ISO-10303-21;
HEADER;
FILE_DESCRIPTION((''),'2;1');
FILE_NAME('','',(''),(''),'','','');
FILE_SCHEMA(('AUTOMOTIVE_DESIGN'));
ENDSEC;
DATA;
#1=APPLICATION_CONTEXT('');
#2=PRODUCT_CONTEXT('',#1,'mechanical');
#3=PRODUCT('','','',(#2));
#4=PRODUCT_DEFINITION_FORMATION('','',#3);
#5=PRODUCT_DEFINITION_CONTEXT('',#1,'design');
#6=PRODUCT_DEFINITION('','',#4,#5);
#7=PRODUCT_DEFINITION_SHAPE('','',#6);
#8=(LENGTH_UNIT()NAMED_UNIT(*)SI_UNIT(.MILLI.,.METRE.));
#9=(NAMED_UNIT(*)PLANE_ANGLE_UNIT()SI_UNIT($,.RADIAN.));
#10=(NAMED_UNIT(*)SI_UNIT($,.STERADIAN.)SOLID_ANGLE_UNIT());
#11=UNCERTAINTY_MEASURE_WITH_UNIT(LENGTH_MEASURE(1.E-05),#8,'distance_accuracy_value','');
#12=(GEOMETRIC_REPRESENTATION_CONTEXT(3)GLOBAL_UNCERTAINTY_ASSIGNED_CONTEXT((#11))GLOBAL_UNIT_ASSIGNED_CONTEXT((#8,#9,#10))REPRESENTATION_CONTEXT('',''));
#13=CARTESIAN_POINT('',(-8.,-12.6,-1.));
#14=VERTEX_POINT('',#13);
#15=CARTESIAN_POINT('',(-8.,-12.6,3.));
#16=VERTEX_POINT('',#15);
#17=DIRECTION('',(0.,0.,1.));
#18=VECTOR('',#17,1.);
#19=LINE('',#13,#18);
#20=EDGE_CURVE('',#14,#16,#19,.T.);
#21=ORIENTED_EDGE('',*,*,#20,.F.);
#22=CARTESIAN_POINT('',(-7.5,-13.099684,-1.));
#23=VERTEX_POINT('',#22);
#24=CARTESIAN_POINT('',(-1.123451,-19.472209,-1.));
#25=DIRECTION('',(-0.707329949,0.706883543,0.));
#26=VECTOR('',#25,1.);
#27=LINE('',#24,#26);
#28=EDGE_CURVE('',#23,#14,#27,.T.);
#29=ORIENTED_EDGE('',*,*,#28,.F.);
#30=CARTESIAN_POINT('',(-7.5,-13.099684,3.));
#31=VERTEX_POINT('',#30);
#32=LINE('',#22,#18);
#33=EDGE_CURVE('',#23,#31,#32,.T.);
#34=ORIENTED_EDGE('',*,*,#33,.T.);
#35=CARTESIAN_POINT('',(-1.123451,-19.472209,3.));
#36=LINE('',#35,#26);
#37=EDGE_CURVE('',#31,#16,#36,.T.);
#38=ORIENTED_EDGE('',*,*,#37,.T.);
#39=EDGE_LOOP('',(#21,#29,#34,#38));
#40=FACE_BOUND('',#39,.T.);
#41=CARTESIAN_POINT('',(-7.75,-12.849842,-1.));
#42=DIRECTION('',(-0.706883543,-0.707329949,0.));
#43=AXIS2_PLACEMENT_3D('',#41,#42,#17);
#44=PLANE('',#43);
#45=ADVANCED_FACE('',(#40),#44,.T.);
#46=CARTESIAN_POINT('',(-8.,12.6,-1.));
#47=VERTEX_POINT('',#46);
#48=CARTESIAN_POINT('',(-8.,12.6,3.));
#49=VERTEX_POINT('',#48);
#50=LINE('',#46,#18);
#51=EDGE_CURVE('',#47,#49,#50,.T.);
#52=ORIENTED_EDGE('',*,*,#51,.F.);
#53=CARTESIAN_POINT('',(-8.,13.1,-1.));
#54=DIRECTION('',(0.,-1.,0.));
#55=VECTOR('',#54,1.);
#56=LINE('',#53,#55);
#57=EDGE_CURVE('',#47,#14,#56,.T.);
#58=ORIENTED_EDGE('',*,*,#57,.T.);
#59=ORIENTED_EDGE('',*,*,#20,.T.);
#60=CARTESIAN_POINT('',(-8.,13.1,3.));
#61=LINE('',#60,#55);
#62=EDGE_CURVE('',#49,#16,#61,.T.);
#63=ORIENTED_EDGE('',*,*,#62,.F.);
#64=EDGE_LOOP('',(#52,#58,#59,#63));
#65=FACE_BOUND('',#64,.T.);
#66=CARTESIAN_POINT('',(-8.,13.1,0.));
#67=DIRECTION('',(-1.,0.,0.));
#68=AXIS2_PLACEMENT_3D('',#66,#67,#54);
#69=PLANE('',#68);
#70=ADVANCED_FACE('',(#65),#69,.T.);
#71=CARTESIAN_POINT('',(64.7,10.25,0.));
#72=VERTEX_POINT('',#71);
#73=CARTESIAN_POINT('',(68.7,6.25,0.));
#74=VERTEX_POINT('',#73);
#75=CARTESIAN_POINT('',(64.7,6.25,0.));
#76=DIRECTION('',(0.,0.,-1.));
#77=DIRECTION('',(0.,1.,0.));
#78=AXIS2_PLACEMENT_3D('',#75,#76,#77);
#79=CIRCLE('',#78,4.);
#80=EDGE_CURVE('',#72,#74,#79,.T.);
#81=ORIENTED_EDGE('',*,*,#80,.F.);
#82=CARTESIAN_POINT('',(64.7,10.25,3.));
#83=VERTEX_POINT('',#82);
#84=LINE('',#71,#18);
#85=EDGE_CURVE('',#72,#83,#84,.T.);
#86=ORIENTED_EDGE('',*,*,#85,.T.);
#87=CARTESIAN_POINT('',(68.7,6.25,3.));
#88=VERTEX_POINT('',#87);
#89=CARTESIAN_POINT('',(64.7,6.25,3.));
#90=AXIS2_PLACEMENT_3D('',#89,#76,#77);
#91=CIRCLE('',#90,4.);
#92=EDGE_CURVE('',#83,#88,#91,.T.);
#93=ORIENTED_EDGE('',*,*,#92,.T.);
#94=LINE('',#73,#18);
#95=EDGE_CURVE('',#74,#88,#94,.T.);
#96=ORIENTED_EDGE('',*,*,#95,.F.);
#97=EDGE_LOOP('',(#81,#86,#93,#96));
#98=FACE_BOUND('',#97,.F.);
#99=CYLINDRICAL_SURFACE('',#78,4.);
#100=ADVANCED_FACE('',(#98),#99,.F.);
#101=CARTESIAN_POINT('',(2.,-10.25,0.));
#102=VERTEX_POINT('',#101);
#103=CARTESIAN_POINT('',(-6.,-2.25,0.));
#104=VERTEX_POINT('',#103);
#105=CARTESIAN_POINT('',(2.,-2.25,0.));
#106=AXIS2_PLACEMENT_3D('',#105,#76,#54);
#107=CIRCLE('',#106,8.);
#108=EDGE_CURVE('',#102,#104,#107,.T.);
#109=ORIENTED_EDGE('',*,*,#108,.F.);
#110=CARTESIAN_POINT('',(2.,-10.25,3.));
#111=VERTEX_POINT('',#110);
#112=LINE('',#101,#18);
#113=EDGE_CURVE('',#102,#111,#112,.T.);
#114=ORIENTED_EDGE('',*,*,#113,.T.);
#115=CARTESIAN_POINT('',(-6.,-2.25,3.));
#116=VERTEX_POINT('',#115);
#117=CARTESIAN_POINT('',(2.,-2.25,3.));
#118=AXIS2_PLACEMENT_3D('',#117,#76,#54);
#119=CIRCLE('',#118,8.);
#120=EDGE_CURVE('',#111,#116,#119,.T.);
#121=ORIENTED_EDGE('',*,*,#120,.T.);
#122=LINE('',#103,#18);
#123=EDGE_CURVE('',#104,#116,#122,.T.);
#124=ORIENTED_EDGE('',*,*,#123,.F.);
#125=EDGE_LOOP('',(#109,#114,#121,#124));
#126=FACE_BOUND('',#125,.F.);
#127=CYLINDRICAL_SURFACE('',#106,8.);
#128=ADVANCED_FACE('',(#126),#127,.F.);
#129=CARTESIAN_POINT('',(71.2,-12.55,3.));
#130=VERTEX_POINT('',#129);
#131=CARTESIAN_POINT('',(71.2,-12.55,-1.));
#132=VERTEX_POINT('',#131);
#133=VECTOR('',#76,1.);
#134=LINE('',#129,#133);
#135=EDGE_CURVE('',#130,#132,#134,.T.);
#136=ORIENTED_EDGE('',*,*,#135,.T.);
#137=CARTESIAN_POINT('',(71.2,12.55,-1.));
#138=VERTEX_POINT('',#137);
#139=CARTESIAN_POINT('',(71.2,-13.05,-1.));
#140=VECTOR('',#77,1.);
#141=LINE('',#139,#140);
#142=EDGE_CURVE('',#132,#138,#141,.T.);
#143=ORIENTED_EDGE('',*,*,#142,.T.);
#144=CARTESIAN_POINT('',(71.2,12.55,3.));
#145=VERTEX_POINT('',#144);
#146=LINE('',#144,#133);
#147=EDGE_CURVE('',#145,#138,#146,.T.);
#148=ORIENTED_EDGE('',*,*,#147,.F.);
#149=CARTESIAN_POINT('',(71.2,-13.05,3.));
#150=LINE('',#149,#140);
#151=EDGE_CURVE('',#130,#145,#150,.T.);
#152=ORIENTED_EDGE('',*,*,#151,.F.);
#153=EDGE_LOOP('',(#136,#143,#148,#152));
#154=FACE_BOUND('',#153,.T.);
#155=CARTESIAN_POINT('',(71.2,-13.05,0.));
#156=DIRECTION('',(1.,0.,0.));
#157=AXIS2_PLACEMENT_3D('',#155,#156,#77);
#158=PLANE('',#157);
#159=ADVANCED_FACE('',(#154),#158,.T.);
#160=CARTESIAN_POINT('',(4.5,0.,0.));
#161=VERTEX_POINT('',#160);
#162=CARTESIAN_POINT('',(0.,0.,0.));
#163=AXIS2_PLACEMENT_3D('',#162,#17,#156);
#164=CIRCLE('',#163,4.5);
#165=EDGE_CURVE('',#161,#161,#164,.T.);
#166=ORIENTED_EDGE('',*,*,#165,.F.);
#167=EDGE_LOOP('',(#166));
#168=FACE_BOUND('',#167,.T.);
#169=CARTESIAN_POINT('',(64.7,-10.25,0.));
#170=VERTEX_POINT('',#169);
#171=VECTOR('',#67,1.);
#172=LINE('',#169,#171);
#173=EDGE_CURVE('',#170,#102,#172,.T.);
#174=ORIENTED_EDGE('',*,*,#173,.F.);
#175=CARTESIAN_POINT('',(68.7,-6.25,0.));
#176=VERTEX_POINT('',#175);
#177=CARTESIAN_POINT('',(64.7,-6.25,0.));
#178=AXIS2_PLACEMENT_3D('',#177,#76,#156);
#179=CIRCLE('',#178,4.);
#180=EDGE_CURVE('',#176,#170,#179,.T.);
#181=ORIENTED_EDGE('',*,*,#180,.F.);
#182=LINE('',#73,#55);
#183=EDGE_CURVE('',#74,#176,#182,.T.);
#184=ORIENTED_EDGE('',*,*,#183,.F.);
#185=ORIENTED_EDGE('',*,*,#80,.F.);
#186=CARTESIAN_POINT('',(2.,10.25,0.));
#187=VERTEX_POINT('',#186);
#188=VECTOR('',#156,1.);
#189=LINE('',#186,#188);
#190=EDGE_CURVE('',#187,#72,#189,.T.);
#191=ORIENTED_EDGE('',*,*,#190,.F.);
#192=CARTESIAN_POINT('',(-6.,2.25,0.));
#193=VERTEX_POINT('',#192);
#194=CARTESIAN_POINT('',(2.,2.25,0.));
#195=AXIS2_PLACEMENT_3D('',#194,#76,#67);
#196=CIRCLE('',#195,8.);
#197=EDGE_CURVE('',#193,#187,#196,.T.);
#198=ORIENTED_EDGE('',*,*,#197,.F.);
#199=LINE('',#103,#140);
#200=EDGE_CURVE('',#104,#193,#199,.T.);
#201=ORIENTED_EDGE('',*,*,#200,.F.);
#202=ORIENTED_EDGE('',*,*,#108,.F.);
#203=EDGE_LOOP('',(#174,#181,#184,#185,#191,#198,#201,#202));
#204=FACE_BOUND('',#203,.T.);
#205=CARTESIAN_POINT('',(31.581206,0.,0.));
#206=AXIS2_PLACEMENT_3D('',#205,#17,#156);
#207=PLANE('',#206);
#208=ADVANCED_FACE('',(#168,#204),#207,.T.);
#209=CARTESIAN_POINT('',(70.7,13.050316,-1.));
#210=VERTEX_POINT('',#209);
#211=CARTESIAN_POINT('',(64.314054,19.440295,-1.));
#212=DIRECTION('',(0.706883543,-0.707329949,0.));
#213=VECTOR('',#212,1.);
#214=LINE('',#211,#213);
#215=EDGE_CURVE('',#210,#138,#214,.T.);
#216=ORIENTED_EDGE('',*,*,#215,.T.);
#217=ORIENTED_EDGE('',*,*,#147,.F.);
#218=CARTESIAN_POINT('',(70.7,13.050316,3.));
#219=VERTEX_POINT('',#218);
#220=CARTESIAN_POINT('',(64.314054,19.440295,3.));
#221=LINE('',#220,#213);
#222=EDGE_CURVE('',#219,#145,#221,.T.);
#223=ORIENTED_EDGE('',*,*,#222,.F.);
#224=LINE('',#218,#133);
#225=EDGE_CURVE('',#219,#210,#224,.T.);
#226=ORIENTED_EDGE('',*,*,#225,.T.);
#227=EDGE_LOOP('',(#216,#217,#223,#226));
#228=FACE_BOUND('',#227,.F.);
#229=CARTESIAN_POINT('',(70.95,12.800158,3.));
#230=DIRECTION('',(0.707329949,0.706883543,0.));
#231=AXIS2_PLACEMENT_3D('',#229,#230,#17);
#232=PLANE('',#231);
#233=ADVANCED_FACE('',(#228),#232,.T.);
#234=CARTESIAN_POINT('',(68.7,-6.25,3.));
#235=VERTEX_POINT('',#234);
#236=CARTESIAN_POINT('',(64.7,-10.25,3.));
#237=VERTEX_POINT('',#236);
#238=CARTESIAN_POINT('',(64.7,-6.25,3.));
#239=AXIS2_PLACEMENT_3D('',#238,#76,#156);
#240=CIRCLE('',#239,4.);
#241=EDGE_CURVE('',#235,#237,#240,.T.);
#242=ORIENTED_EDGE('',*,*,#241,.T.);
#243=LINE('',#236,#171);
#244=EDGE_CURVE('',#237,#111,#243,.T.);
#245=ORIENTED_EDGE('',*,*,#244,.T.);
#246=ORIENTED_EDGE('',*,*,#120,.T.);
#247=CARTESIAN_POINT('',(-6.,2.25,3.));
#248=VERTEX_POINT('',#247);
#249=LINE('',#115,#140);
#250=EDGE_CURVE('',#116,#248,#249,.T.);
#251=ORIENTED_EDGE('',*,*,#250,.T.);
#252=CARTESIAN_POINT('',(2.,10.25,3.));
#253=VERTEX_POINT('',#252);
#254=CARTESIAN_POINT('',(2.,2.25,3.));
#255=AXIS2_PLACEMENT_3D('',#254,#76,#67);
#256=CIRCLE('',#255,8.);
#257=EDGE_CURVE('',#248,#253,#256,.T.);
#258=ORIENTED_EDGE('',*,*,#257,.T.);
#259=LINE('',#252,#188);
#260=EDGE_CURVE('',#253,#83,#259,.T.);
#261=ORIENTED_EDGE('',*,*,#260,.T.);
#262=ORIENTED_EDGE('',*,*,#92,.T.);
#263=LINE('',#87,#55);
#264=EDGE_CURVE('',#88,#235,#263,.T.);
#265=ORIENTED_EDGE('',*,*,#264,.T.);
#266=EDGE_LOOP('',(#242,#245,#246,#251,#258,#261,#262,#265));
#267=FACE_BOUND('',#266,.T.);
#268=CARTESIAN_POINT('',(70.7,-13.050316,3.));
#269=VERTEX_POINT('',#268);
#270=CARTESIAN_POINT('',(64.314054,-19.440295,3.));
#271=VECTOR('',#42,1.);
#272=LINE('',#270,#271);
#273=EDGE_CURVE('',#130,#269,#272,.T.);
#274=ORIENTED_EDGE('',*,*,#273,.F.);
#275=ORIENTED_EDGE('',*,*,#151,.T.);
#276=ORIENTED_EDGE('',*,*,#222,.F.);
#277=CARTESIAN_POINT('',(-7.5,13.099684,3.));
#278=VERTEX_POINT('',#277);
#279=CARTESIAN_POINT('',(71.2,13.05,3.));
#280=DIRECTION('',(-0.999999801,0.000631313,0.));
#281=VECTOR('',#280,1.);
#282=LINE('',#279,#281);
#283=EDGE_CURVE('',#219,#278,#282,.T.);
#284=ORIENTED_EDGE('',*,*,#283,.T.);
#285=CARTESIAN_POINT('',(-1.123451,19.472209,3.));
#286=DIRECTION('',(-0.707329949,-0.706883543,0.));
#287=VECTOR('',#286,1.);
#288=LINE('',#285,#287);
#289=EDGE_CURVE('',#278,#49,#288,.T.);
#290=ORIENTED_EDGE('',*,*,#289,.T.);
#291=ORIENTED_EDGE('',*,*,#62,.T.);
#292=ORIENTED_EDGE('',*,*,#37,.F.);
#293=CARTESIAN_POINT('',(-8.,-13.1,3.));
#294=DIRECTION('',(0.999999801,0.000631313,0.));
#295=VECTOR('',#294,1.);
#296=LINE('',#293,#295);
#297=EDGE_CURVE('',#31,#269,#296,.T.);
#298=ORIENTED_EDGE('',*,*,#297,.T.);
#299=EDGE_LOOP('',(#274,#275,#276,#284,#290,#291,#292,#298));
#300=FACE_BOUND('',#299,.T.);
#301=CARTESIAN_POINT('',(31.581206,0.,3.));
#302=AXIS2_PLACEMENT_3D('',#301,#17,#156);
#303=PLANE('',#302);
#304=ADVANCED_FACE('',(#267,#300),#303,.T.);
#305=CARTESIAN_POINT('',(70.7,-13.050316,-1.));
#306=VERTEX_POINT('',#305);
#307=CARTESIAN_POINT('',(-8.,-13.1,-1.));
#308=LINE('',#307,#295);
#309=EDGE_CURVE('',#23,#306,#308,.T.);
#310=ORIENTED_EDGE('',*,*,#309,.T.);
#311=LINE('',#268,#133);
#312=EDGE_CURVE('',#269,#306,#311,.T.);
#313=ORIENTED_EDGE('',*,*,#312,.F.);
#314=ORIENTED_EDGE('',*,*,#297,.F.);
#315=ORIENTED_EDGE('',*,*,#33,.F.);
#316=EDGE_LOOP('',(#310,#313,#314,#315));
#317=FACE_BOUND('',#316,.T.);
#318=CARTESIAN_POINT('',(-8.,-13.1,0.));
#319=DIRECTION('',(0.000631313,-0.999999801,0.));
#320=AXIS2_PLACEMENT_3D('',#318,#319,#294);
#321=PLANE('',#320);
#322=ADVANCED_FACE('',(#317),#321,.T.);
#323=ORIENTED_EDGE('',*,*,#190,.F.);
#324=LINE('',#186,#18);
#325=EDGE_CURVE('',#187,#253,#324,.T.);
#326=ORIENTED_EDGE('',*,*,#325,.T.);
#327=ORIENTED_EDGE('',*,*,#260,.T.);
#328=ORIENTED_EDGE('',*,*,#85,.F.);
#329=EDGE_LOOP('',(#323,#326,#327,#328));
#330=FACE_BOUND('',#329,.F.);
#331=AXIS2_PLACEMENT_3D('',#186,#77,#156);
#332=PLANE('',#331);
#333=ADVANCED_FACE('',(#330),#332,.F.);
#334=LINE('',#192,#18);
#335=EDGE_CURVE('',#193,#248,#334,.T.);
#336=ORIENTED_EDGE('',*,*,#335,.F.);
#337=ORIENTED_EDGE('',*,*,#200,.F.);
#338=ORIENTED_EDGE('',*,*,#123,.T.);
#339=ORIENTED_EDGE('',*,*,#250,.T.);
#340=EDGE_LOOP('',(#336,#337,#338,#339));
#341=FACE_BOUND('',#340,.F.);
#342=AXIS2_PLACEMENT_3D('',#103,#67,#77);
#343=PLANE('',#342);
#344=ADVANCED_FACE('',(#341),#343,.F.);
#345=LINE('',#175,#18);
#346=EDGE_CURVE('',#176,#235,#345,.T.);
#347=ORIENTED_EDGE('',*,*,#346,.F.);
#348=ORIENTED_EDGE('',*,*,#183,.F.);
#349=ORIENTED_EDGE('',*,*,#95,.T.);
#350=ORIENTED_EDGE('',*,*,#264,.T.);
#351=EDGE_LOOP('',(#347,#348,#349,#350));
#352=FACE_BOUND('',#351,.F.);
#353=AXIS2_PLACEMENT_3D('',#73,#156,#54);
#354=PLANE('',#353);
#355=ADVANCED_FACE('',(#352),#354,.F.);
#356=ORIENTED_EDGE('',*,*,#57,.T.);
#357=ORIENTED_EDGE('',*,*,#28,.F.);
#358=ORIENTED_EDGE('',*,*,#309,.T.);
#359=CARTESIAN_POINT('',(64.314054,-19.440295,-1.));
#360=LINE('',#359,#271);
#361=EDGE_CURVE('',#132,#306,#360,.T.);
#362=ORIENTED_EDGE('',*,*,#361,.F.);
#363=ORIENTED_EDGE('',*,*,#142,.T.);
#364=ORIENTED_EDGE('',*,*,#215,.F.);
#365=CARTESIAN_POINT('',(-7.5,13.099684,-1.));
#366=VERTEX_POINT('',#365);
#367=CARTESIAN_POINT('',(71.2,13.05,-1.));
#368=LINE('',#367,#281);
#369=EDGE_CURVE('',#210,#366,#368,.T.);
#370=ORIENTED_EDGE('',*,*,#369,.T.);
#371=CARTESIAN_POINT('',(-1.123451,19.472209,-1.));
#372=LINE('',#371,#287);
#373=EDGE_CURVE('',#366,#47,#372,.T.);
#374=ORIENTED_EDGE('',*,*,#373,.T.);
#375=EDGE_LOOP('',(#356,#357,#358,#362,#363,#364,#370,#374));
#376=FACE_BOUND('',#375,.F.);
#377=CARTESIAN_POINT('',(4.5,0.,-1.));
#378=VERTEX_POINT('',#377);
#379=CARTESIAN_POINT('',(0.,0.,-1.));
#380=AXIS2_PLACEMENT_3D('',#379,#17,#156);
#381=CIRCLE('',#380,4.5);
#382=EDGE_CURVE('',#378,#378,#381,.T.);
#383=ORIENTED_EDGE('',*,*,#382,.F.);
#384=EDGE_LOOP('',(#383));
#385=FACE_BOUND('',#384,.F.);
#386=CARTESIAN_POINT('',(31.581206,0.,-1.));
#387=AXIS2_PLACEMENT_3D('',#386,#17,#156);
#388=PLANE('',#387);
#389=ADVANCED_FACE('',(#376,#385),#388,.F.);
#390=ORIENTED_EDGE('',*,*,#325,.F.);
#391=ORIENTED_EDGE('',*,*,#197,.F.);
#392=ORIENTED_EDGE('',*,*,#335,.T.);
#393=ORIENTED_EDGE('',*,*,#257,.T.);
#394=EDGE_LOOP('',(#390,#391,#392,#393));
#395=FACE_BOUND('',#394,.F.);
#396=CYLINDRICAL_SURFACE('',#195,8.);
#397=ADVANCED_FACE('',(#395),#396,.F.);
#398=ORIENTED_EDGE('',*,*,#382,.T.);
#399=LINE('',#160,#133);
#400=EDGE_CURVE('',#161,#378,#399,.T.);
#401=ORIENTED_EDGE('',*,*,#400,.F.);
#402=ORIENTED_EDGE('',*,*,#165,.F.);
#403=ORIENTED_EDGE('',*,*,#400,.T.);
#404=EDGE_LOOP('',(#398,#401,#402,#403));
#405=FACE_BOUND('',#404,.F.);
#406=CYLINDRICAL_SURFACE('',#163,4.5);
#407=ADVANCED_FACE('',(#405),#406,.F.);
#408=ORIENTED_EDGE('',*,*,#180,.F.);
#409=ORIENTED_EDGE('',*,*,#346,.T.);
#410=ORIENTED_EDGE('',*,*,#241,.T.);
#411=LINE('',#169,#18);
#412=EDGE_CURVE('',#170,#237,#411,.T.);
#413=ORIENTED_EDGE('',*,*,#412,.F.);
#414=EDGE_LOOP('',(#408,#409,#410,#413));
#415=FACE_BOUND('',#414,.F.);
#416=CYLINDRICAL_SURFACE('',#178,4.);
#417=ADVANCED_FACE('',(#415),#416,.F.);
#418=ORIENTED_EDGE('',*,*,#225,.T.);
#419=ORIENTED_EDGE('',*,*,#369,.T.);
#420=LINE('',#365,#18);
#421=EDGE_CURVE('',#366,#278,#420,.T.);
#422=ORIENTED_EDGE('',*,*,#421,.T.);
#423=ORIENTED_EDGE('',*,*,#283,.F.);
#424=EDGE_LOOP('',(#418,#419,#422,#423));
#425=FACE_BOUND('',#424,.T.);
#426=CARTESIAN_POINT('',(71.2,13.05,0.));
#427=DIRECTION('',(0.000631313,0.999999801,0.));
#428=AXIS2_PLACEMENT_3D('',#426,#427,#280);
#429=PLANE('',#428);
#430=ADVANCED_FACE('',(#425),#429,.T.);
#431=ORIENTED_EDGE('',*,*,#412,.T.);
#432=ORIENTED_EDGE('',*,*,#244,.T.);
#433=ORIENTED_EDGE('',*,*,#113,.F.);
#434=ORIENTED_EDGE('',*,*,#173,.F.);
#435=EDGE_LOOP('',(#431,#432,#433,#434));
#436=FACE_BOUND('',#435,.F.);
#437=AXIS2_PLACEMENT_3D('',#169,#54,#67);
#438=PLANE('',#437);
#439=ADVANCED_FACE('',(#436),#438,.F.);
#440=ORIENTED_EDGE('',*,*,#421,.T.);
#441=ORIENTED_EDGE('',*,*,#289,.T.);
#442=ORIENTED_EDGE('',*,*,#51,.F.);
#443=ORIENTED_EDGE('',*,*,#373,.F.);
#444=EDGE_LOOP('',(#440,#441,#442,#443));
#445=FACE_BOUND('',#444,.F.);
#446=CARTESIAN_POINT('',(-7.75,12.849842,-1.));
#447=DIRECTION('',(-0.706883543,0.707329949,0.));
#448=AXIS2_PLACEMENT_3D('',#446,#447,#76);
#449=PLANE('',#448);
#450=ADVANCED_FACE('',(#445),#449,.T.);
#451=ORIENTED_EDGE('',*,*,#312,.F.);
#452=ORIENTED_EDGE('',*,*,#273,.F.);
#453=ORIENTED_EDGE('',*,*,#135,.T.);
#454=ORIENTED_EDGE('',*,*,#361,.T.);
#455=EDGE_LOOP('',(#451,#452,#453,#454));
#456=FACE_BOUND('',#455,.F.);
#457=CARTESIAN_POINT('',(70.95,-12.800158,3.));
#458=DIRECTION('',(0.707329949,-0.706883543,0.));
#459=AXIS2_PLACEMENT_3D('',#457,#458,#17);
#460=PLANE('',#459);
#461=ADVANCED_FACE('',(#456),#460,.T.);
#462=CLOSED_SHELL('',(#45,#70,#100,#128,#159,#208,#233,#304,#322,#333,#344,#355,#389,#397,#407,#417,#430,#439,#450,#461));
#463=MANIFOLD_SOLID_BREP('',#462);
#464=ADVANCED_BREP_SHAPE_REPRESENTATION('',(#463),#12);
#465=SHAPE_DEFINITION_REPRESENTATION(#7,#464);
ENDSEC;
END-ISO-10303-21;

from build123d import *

# Parameters (mm, degrees)
F1_DEPTH = 3
F0_R     = 4.5
F2_DEPTH = 1
F3_SIZE  = 0.5


with BuildPart() as f1:
    # F0 (on Top) → F1 (new body)
    with BuildSketch(Plane.XY):
        Polygon((71.2, 13.05), (-8, 13.1), (-8, -13.1), (71.2, -13.05), align=None)
        with BuildLine():
            ThreePointArc((-6, 2.25), (-3.6568542495, 7.9068542495), (2, 10.25))
            Line((2, 10.25), (64.7, 10.25))
            ThreePointArc((64.7, 10.25), (67.5284271247, 9.0784271247), (68.7, 6.25))
            Line((68.7, 6.25), (68.7, -6.25))
            ThreePointArc((68.7, -6.25), (67.5284271247, -9.0784271247), (64.7, -10.25))
            Line((64.7, -10.25), (2, -10.25))
            ThreePointArc((2, -10.25), (-3.6568542495, -7.9068542495), (-6, -2.25))
            Line((-6, -2.25), (-6, 2.25))
        make_face(mode=Mode.SUBTRACT)
    extrude(amount=F1_DEPTH)

    # F0 (on Top) → F2 (join)
    with BuildSketch(Plane.XY):
        Polygon((71.2, 13.05), (-8, 13.1), (-8, -13.1), (71.2, -13.05), align=None)
        with BuildLine():
            ThreePointArc((-6, 2.25), (-3.6568542495, 7.9068542495), (2, 10.25))
            Line((2, 10.25), (64.7, 10.25))
            ThreePointArc((64.7, 10.25), (67.5284271247, 9.0784271247), (68.7, 6.25))
            Line((68.7, 6.25), (68.7, -6.25))
            ThreePointArc((68.7, -6.25), (67.5284271247, -9.0784271247), (64.7, -10.25))
            Line((64.7, -10.25), (2, -10.25))
            ThreePointArc((2, -10.25), (-3.6568542495, -7.9068542495), (-6, -2.25))
            Line((-6, -2.25), (-6, 2.25))
        make_face(mode=Mode.SUBTRACT)
        with BuildLine():
            Line((64.7, 10.25), (2, 10.25))
            ThreePointArc((2, 10.25), (-3.6568542495, 7.9068542495), (-6, 2.25))
            Line((-6, 2.25), (-6, -2.25))
            ThreePointArc((-6, -2.25), (-3.6568542495, -7.9068542495), (2, -10.25))
            Line((2, -10.25), (64.7, -10.25))
            ThreePointArc((64.7, -10.25), (67.5284271247, -9.0784271247), (68.7, -6.25))
            Line((68.7, -6.25), (68.7, 6.25))
            ThreePointArc((68.7, 6.25), (67.5284271247, 9.0784271247), (64.7, 10.25))
        make_face()
        Circle(F0_R, mode=Mode.SUBTRACT)
    extrude(amount=-F2_DEPTH)

    # F3
    f3_edges = [f1.edges().sort_by_distance(p)[0] for p in [
        (-8, -13.1, 1),
        (-8, 13.1, 1),
        (71.2, -13.05, 1),
        (71.2, 13.05, 1),
    ]]
    chamfer(f3_edges, length=F3_SIZE)


solid = f1.part
